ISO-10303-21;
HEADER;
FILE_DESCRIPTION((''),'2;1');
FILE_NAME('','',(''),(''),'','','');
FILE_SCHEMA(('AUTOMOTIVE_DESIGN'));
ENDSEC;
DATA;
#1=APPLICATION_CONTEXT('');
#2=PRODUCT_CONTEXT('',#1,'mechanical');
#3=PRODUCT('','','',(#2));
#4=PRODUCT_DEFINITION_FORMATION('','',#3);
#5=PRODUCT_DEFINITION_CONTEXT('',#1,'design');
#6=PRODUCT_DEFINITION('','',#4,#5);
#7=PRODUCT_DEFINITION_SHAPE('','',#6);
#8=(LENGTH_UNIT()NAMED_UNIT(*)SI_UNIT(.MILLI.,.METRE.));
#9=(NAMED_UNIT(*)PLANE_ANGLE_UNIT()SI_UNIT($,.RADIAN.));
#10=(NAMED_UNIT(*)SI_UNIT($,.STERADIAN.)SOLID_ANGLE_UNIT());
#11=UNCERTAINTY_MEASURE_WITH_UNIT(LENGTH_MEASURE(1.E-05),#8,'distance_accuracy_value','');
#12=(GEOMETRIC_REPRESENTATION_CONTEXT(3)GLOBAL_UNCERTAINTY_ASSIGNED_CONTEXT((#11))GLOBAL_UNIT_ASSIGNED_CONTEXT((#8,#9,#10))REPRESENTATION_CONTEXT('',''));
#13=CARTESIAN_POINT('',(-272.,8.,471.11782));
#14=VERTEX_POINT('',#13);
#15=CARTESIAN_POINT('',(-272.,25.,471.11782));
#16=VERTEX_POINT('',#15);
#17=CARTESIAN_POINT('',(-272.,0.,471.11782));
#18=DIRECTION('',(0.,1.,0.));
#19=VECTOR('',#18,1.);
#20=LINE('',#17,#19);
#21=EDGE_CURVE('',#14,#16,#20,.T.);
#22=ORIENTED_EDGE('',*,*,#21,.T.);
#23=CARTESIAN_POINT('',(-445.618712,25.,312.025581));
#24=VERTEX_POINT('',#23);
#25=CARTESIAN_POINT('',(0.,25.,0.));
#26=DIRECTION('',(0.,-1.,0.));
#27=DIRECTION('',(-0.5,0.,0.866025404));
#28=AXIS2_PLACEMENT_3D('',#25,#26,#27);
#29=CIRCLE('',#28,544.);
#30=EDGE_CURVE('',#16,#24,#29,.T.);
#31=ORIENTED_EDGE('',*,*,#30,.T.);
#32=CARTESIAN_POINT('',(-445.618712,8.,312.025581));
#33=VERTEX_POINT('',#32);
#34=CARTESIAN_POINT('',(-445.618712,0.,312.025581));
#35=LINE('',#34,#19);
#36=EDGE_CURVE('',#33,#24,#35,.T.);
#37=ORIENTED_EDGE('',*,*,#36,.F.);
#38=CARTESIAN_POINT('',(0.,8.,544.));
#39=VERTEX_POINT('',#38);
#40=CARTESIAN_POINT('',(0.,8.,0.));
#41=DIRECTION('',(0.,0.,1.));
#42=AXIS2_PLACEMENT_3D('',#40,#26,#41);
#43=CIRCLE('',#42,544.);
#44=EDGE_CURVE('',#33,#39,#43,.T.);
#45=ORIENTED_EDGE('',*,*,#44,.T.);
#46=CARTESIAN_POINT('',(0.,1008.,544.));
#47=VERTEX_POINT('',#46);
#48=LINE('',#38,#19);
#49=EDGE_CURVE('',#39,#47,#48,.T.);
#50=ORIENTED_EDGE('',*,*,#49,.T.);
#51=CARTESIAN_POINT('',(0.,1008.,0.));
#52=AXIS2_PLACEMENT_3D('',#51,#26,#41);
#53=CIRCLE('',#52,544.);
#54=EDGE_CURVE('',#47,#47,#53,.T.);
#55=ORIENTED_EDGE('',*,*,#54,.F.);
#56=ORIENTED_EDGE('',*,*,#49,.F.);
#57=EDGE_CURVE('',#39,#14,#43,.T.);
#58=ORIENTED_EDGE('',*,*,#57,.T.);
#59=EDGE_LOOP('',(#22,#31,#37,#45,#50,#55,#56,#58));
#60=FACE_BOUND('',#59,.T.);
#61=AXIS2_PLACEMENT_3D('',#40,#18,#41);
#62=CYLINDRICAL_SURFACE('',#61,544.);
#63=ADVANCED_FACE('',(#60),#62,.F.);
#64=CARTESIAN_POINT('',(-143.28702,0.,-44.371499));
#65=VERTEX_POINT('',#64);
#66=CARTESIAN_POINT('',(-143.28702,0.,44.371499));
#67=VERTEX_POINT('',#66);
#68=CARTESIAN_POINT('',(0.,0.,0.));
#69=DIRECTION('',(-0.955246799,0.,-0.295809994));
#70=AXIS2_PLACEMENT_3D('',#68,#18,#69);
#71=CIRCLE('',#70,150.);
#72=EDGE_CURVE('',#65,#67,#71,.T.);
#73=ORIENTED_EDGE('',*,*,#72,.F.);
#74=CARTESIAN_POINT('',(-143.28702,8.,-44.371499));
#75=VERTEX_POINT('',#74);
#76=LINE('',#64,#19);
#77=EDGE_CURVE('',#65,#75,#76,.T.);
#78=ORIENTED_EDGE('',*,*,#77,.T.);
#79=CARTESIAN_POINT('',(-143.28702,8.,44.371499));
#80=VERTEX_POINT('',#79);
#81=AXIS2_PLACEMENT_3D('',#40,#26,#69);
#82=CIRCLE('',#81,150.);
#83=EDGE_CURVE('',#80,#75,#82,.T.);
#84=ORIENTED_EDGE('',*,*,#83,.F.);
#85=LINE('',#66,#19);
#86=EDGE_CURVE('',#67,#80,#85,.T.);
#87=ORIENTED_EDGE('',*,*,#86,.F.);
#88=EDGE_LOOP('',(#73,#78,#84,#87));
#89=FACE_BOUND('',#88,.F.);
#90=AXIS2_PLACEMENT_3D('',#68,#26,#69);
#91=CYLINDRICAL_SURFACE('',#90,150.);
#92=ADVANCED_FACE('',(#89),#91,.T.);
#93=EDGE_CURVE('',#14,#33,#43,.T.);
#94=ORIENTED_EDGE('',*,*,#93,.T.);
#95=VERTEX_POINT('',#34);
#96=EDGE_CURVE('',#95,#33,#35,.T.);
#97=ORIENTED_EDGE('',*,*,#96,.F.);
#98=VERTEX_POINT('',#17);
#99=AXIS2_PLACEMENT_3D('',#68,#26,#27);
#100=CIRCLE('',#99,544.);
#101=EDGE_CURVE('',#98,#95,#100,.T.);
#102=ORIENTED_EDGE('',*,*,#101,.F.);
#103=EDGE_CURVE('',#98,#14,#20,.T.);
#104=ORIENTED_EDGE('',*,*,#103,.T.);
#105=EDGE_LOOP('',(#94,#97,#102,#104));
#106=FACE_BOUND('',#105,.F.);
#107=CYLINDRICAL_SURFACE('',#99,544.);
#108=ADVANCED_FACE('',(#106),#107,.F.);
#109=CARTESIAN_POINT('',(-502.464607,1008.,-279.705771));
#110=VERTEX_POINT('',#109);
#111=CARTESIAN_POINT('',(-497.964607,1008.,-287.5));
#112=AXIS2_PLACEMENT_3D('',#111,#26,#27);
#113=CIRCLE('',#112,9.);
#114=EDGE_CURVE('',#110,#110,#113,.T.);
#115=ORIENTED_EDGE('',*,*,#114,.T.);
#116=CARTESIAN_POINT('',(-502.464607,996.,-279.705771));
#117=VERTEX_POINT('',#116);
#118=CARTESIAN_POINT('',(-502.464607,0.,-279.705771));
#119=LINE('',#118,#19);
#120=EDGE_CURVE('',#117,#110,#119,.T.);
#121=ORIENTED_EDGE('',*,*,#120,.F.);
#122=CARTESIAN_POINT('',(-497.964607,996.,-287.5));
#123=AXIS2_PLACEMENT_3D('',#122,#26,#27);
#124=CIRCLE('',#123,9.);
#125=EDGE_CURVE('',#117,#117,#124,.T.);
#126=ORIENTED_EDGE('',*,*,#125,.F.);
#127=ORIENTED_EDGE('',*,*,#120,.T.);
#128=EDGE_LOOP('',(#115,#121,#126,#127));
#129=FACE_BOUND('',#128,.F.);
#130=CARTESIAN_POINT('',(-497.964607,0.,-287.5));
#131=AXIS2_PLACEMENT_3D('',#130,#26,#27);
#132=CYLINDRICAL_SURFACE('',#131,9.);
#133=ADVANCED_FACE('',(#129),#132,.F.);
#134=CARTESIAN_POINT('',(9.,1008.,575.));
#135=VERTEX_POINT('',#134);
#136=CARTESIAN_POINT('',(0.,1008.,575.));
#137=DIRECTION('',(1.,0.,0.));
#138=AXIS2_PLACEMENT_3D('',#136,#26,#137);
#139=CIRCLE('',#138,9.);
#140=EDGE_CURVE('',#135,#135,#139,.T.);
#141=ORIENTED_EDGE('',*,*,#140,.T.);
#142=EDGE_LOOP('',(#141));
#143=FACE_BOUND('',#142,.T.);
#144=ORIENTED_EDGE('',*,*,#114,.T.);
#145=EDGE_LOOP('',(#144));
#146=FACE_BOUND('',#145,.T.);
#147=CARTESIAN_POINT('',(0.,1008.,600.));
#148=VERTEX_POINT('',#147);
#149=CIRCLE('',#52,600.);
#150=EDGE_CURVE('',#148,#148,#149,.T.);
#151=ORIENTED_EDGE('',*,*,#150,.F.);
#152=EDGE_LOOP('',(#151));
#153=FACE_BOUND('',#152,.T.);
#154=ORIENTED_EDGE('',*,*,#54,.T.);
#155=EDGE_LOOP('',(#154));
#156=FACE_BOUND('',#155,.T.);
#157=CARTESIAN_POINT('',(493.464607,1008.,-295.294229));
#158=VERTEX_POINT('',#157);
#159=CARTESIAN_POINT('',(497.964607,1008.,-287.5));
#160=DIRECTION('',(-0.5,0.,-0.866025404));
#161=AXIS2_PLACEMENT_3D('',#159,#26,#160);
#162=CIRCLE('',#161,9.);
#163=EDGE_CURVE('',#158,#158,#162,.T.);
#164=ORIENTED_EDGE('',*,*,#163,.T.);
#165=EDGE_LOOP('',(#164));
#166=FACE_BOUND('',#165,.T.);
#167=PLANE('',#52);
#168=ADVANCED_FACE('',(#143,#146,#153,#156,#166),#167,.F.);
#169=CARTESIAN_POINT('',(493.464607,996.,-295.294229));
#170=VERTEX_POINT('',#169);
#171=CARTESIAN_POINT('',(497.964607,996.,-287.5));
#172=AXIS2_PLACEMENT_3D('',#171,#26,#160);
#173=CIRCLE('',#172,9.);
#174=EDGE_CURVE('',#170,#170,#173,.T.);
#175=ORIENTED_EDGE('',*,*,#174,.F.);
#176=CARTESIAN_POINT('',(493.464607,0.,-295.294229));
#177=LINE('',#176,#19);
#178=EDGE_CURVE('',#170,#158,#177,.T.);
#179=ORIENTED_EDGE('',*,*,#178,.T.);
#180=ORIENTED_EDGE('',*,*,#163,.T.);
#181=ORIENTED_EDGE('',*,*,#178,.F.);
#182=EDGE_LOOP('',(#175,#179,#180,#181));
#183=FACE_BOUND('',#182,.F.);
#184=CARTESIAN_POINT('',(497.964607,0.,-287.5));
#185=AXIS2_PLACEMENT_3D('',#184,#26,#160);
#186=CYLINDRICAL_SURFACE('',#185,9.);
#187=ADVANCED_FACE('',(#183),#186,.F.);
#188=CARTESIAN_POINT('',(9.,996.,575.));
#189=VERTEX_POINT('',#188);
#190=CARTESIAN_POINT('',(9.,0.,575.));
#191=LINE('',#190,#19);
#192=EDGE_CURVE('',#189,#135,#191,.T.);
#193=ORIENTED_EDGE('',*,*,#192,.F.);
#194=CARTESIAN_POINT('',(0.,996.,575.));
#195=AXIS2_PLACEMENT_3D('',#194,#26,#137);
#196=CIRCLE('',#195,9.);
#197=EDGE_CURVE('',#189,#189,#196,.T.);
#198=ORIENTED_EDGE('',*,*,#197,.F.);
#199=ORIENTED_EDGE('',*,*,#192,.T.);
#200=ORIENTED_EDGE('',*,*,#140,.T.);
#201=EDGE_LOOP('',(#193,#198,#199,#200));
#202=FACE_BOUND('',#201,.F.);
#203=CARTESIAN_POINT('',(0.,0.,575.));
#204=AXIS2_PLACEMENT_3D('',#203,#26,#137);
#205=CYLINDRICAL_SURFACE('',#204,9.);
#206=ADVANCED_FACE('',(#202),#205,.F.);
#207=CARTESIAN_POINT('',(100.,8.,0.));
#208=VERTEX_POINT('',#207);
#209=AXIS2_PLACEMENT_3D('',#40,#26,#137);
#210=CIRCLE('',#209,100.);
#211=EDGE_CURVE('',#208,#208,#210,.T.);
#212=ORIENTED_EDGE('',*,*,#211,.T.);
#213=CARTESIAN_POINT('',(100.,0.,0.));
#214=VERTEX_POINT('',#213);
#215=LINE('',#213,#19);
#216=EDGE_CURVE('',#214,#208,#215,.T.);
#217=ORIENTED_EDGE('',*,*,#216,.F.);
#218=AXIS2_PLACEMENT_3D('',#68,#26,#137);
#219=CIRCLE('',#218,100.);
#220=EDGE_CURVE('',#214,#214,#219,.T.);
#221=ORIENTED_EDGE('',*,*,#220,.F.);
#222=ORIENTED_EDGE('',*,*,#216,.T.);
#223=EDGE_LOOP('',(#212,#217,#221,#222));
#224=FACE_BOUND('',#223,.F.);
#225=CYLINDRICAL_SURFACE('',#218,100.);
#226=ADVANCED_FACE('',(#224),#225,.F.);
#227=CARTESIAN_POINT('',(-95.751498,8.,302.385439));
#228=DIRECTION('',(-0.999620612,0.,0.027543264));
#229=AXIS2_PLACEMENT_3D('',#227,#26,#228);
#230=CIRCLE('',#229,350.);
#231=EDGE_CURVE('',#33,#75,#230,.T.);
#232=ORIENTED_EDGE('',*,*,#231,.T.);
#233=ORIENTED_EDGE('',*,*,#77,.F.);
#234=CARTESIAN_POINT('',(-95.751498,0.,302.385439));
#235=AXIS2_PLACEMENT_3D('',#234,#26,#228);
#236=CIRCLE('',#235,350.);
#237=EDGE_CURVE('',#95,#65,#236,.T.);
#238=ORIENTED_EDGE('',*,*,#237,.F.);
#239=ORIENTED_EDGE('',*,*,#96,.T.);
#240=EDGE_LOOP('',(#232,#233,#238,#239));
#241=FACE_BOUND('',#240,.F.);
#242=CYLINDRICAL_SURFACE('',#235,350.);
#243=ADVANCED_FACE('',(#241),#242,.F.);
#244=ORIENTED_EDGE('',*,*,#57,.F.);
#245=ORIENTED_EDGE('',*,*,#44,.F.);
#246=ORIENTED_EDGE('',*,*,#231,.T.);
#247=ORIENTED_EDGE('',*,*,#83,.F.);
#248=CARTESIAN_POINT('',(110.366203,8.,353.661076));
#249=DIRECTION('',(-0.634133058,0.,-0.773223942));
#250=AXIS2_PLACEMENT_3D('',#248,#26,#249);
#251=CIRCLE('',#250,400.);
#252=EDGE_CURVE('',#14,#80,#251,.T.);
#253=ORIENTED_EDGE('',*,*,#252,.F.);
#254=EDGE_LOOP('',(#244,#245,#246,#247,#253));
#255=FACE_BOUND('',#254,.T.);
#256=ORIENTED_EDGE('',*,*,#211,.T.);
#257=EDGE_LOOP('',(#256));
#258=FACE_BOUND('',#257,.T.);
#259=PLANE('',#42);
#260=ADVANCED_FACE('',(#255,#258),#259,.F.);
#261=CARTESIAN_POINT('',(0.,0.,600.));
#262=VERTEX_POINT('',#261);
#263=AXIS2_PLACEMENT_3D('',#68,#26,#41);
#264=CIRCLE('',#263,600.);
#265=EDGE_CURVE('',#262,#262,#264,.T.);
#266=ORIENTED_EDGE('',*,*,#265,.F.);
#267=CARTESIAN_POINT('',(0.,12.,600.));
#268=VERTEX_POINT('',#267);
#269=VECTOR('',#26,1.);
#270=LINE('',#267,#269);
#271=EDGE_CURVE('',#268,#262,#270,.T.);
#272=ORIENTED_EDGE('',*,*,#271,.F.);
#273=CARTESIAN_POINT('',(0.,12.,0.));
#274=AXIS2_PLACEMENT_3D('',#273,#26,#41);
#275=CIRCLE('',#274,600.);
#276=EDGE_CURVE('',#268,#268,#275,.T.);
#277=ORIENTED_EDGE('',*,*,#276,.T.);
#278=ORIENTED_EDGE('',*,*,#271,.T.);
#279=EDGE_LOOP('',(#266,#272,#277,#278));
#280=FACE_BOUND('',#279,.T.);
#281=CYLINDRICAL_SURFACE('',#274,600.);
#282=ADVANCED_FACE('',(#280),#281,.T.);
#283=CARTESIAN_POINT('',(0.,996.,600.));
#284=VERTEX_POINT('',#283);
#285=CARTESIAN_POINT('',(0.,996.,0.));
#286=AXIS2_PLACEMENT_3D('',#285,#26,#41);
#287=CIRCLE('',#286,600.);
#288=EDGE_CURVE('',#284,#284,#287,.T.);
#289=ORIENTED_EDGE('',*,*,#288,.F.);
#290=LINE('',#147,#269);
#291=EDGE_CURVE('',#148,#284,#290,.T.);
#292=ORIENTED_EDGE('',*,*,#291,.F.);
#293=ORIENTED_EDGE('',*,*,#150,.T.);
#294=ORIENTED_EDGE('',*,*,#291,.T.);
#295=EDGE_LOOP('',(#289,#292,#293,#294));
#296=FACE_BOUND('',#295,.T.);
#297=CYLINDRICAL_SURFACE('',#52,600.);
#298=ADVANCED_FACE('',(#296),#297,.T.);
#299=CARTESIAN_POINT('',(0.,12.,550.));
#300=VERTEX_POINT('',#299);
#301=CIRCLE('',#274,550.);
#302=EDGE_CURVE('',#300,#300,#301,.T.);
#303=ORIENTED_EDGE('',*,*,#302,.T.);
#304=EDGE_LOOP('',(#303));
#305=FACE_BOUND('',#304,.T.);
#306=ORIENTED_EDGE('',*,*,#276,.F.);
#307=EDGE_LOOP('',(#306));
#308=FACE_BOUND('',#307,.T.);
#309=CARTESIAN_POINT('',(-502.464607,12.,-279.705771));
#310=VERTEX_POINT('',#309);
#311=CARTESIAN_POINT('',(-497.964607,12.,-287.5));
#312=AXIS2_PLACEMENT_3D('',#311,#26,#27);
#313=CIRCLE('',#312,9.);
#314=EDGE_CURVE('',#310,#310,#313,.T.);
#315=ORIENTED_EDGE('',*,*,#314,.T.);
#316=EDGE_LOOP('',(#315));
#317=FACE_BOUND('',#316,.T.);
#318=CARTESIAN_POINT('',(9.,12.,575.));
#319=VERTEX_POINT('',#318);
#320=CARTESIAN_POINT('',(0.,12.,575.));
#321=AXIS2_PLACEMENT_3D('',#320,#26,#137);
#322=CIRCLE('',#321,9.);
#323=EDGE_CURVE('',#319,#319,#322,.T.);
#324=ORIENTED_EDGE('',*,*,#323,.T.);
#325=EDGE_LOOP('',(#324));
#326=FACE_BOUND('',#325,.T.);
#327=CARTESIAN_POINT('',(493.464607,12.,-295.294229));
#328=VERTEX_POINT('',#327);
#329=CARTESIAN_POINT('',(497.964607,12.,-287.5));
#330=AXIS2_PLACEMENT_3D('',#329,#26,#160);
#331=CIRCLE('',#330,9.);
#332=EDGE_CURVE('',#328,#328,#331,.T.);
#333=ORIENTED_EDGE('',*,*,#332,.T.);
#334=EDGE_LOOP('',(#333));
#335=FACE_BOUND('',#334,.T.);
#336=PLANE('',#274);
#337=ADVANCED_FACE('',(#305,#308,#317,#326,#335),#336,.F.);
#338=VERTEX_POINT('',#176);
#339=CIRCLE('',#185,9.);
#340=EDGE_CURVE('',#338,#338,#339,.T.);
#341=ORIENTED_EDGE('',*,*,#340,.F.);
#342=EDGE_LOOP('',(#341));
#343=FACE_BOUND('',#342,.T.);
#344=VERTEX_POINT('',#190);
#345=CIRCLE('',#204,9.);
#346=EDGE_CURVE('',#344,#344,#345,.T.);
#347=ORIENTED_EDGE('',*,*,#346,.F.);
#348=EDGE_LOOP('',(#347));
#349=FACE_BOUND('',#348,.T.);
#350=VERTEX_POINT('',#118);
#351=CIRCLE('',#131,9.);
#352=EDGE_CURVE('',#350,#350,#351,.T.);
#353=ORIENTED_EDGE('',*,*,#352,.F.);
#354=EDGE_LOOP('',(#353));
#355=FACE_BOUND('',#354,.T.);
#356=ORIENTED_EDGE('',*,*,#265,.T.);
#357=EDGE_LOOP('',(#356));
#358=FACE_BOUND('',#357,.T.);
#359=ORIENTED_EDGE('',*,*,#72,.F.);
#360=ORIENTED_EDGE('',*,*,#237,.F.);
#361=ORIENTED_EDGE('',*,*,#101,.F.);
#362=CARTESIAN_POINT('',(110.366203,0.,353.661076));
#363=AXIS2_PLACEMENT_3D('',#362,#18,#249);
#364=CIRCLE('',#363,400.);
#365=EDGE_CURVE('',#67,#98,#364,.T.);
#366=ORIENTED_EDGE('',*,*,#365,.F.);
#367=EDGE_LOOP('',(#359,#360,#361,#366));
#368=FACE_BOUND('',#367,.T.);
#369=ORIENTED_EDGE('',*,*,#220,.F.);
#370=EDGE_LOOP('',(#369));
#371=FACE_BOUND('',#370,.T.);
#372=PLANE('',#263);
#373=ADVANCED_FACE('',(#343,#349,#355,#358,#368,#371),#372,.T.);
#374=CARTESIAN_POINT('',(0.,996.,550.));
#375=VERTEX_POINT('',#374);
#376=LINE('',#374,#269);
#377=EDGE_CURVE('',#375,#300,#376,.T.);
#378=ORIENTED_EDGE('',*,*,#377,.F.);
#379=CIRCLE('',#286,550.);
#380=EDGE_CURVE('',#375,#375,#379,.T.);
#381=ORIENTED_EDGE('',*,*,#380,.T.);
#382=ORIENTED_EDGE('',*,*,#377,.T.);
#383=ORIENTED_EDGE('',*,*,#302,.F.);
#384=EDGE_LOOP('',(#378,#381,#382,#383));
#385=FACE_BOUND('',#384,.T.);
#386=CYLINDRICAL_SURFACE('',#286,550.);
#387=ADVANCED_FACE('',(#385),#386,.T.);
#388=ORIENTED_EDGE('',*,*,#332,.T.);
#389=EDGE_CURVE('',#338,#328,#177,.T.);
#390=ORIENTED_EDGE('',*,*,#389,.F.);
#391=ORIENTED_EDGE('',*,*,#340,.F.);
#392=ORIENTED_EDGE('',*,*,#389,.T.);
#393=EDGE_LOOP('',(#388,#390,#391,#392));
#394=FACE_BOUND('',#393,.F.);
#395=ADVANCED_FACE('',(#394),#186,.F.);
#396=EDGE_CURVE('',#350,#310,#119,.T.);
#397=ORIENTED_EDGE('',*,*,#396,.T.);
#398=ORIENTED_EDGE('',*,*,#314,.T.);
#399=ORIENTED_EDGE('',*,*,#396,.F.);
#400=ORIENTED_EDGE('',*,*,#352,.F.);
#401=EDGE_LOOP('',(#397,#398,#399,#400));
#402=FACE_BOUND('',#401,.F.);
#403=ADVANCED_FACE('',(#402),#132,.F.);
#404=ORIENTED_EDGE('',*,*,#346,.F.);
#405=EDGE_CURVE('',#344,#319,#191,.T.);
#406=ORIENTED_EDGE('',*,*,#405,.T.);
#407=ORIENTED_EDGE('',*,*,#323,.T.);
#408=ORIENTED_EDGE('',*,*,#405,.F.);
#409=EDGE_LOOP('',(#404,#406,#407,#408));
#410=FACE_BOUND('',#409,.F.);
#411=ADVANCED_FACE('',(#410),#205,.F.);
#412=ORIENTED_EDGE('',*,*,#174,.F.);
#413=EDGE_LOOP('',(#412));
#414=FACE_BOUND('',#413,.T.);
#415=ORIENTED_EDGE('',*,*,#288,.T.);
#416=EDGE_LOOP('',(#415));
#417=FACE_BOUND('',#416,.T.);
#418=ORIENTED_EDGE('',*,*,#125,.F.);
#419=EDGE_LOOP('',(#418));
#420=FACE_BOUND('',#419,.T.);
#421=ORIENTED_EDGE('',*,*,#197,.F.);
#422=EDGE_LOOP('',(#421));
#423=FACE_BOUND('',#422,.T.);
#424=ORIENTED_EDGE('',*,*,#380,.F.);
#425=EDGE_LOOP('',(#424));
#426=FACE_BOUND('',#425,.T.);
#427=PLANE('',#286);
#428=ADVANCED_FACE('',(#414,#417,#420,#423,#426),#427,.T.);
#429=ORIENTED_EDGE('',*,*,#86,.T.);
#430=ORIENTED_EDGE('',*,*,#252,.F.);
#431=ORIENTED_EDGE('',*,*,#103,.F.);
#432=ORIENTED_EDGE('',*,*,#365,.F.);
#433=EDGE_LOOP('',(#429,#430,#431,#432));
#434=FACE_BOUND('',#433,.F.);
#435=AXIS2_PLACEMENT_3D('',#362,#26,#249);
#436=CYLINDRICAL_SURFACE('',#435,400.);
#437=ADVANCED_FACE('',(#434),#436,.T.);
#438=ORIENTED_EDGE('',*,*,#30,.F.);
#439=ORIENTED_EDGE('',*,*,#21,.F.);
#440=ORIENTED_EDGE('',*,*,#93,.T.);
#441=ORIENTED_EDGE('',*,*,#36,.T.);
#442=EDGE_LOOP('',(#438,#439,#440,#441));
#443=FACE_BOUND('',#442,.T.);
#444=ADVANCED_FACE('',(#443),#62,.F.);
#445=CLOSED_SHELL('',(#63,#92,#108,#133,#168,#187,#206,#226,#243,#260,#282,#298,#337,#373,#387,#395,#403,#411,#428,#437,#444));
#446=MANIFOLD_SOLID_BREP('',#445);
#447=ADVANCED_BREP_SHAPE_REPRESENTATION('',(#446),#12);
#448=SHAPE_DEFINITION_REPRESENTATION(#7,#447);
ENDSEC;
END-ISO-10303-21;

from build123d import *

# Parameters (mm, degrees)
F2_R            = 100
F3_DEPTH        = 25
F4_R            = 9
F5_DEPTH        = 1008.001
F5_COPIES_COUNT = 3
F7_DEPTH        = 25


# Not quite as in the source:
# - a pattern or mirror of a feature is missing from the dataset's text; its kind, count and spacing are read off the source's solid


with BuildPart() as f1:
    # F0 (on Right) → F1 (revolve)
    with BuildSketch(Plane.YZ):
        Polygon((12, 600), (0, 600), (0, 0), (8, 0), (8, 544), (1008, 544), (1008, 600), (996, 600), (996, 550), (12, 550), align=None)
    revolve(axis=Axis((0, 4, 0), (0, -1, 0)))

    # F2 (on face) → F3 (cut)
    with BuildSketch(Plane.XZ):
        Circle(F2_R)
    extrude(amount=-F3_DEPTH, mode=Mode.SUBTRACT)

    # F4 (on face) → F5 (cut, through all)
    with BuildSketch(Plane.XZ):
        with Locations((0, 575)):
            Circle(F4_R)
    f5 = extrude(amount=-F5_DEPTH, mode=Mode.SUBTRACT)

    # F5_copies: F5 ×3 about axis
    f5_copies_axis = Axis((0, 0, 0), (0, 1, 0))
    for i in range(1, F5_COPIES_COUNT):
        add(f5.rotate(f5_copies_axis, i * 360 / F5_COPIES_COUNT), mode=Mode.SUBTRACT)

    # F6 (on face) → F7 (cut)
    with BuildSketch(Plane.XZ):
        with BuildLine():
            ThreePointArc((-143.2870199028, 44.3714990436), (-272.593694434, 238.1547264126), (-272, 471.1178196587))
            ThreePointArc((-272, 471.1178196587), (-367.5210729429, 401.0788712247), (-445.6187120932, 312.025581375))
            ThreePointArc((-445.6187120932, 312.025581375), (-362.6540145598, 75.9719974886), (-143.2870199028, -44.3714990436))
            ThreePointArc((-143.2870199028, -44.3714990436), (-150, 0), (-143.2870199028, 44.3714990436))
        make_face()
    extrude(amount=-F7_DEPTH, mode=Mode.SUBTRACT)


solid = f1.part
